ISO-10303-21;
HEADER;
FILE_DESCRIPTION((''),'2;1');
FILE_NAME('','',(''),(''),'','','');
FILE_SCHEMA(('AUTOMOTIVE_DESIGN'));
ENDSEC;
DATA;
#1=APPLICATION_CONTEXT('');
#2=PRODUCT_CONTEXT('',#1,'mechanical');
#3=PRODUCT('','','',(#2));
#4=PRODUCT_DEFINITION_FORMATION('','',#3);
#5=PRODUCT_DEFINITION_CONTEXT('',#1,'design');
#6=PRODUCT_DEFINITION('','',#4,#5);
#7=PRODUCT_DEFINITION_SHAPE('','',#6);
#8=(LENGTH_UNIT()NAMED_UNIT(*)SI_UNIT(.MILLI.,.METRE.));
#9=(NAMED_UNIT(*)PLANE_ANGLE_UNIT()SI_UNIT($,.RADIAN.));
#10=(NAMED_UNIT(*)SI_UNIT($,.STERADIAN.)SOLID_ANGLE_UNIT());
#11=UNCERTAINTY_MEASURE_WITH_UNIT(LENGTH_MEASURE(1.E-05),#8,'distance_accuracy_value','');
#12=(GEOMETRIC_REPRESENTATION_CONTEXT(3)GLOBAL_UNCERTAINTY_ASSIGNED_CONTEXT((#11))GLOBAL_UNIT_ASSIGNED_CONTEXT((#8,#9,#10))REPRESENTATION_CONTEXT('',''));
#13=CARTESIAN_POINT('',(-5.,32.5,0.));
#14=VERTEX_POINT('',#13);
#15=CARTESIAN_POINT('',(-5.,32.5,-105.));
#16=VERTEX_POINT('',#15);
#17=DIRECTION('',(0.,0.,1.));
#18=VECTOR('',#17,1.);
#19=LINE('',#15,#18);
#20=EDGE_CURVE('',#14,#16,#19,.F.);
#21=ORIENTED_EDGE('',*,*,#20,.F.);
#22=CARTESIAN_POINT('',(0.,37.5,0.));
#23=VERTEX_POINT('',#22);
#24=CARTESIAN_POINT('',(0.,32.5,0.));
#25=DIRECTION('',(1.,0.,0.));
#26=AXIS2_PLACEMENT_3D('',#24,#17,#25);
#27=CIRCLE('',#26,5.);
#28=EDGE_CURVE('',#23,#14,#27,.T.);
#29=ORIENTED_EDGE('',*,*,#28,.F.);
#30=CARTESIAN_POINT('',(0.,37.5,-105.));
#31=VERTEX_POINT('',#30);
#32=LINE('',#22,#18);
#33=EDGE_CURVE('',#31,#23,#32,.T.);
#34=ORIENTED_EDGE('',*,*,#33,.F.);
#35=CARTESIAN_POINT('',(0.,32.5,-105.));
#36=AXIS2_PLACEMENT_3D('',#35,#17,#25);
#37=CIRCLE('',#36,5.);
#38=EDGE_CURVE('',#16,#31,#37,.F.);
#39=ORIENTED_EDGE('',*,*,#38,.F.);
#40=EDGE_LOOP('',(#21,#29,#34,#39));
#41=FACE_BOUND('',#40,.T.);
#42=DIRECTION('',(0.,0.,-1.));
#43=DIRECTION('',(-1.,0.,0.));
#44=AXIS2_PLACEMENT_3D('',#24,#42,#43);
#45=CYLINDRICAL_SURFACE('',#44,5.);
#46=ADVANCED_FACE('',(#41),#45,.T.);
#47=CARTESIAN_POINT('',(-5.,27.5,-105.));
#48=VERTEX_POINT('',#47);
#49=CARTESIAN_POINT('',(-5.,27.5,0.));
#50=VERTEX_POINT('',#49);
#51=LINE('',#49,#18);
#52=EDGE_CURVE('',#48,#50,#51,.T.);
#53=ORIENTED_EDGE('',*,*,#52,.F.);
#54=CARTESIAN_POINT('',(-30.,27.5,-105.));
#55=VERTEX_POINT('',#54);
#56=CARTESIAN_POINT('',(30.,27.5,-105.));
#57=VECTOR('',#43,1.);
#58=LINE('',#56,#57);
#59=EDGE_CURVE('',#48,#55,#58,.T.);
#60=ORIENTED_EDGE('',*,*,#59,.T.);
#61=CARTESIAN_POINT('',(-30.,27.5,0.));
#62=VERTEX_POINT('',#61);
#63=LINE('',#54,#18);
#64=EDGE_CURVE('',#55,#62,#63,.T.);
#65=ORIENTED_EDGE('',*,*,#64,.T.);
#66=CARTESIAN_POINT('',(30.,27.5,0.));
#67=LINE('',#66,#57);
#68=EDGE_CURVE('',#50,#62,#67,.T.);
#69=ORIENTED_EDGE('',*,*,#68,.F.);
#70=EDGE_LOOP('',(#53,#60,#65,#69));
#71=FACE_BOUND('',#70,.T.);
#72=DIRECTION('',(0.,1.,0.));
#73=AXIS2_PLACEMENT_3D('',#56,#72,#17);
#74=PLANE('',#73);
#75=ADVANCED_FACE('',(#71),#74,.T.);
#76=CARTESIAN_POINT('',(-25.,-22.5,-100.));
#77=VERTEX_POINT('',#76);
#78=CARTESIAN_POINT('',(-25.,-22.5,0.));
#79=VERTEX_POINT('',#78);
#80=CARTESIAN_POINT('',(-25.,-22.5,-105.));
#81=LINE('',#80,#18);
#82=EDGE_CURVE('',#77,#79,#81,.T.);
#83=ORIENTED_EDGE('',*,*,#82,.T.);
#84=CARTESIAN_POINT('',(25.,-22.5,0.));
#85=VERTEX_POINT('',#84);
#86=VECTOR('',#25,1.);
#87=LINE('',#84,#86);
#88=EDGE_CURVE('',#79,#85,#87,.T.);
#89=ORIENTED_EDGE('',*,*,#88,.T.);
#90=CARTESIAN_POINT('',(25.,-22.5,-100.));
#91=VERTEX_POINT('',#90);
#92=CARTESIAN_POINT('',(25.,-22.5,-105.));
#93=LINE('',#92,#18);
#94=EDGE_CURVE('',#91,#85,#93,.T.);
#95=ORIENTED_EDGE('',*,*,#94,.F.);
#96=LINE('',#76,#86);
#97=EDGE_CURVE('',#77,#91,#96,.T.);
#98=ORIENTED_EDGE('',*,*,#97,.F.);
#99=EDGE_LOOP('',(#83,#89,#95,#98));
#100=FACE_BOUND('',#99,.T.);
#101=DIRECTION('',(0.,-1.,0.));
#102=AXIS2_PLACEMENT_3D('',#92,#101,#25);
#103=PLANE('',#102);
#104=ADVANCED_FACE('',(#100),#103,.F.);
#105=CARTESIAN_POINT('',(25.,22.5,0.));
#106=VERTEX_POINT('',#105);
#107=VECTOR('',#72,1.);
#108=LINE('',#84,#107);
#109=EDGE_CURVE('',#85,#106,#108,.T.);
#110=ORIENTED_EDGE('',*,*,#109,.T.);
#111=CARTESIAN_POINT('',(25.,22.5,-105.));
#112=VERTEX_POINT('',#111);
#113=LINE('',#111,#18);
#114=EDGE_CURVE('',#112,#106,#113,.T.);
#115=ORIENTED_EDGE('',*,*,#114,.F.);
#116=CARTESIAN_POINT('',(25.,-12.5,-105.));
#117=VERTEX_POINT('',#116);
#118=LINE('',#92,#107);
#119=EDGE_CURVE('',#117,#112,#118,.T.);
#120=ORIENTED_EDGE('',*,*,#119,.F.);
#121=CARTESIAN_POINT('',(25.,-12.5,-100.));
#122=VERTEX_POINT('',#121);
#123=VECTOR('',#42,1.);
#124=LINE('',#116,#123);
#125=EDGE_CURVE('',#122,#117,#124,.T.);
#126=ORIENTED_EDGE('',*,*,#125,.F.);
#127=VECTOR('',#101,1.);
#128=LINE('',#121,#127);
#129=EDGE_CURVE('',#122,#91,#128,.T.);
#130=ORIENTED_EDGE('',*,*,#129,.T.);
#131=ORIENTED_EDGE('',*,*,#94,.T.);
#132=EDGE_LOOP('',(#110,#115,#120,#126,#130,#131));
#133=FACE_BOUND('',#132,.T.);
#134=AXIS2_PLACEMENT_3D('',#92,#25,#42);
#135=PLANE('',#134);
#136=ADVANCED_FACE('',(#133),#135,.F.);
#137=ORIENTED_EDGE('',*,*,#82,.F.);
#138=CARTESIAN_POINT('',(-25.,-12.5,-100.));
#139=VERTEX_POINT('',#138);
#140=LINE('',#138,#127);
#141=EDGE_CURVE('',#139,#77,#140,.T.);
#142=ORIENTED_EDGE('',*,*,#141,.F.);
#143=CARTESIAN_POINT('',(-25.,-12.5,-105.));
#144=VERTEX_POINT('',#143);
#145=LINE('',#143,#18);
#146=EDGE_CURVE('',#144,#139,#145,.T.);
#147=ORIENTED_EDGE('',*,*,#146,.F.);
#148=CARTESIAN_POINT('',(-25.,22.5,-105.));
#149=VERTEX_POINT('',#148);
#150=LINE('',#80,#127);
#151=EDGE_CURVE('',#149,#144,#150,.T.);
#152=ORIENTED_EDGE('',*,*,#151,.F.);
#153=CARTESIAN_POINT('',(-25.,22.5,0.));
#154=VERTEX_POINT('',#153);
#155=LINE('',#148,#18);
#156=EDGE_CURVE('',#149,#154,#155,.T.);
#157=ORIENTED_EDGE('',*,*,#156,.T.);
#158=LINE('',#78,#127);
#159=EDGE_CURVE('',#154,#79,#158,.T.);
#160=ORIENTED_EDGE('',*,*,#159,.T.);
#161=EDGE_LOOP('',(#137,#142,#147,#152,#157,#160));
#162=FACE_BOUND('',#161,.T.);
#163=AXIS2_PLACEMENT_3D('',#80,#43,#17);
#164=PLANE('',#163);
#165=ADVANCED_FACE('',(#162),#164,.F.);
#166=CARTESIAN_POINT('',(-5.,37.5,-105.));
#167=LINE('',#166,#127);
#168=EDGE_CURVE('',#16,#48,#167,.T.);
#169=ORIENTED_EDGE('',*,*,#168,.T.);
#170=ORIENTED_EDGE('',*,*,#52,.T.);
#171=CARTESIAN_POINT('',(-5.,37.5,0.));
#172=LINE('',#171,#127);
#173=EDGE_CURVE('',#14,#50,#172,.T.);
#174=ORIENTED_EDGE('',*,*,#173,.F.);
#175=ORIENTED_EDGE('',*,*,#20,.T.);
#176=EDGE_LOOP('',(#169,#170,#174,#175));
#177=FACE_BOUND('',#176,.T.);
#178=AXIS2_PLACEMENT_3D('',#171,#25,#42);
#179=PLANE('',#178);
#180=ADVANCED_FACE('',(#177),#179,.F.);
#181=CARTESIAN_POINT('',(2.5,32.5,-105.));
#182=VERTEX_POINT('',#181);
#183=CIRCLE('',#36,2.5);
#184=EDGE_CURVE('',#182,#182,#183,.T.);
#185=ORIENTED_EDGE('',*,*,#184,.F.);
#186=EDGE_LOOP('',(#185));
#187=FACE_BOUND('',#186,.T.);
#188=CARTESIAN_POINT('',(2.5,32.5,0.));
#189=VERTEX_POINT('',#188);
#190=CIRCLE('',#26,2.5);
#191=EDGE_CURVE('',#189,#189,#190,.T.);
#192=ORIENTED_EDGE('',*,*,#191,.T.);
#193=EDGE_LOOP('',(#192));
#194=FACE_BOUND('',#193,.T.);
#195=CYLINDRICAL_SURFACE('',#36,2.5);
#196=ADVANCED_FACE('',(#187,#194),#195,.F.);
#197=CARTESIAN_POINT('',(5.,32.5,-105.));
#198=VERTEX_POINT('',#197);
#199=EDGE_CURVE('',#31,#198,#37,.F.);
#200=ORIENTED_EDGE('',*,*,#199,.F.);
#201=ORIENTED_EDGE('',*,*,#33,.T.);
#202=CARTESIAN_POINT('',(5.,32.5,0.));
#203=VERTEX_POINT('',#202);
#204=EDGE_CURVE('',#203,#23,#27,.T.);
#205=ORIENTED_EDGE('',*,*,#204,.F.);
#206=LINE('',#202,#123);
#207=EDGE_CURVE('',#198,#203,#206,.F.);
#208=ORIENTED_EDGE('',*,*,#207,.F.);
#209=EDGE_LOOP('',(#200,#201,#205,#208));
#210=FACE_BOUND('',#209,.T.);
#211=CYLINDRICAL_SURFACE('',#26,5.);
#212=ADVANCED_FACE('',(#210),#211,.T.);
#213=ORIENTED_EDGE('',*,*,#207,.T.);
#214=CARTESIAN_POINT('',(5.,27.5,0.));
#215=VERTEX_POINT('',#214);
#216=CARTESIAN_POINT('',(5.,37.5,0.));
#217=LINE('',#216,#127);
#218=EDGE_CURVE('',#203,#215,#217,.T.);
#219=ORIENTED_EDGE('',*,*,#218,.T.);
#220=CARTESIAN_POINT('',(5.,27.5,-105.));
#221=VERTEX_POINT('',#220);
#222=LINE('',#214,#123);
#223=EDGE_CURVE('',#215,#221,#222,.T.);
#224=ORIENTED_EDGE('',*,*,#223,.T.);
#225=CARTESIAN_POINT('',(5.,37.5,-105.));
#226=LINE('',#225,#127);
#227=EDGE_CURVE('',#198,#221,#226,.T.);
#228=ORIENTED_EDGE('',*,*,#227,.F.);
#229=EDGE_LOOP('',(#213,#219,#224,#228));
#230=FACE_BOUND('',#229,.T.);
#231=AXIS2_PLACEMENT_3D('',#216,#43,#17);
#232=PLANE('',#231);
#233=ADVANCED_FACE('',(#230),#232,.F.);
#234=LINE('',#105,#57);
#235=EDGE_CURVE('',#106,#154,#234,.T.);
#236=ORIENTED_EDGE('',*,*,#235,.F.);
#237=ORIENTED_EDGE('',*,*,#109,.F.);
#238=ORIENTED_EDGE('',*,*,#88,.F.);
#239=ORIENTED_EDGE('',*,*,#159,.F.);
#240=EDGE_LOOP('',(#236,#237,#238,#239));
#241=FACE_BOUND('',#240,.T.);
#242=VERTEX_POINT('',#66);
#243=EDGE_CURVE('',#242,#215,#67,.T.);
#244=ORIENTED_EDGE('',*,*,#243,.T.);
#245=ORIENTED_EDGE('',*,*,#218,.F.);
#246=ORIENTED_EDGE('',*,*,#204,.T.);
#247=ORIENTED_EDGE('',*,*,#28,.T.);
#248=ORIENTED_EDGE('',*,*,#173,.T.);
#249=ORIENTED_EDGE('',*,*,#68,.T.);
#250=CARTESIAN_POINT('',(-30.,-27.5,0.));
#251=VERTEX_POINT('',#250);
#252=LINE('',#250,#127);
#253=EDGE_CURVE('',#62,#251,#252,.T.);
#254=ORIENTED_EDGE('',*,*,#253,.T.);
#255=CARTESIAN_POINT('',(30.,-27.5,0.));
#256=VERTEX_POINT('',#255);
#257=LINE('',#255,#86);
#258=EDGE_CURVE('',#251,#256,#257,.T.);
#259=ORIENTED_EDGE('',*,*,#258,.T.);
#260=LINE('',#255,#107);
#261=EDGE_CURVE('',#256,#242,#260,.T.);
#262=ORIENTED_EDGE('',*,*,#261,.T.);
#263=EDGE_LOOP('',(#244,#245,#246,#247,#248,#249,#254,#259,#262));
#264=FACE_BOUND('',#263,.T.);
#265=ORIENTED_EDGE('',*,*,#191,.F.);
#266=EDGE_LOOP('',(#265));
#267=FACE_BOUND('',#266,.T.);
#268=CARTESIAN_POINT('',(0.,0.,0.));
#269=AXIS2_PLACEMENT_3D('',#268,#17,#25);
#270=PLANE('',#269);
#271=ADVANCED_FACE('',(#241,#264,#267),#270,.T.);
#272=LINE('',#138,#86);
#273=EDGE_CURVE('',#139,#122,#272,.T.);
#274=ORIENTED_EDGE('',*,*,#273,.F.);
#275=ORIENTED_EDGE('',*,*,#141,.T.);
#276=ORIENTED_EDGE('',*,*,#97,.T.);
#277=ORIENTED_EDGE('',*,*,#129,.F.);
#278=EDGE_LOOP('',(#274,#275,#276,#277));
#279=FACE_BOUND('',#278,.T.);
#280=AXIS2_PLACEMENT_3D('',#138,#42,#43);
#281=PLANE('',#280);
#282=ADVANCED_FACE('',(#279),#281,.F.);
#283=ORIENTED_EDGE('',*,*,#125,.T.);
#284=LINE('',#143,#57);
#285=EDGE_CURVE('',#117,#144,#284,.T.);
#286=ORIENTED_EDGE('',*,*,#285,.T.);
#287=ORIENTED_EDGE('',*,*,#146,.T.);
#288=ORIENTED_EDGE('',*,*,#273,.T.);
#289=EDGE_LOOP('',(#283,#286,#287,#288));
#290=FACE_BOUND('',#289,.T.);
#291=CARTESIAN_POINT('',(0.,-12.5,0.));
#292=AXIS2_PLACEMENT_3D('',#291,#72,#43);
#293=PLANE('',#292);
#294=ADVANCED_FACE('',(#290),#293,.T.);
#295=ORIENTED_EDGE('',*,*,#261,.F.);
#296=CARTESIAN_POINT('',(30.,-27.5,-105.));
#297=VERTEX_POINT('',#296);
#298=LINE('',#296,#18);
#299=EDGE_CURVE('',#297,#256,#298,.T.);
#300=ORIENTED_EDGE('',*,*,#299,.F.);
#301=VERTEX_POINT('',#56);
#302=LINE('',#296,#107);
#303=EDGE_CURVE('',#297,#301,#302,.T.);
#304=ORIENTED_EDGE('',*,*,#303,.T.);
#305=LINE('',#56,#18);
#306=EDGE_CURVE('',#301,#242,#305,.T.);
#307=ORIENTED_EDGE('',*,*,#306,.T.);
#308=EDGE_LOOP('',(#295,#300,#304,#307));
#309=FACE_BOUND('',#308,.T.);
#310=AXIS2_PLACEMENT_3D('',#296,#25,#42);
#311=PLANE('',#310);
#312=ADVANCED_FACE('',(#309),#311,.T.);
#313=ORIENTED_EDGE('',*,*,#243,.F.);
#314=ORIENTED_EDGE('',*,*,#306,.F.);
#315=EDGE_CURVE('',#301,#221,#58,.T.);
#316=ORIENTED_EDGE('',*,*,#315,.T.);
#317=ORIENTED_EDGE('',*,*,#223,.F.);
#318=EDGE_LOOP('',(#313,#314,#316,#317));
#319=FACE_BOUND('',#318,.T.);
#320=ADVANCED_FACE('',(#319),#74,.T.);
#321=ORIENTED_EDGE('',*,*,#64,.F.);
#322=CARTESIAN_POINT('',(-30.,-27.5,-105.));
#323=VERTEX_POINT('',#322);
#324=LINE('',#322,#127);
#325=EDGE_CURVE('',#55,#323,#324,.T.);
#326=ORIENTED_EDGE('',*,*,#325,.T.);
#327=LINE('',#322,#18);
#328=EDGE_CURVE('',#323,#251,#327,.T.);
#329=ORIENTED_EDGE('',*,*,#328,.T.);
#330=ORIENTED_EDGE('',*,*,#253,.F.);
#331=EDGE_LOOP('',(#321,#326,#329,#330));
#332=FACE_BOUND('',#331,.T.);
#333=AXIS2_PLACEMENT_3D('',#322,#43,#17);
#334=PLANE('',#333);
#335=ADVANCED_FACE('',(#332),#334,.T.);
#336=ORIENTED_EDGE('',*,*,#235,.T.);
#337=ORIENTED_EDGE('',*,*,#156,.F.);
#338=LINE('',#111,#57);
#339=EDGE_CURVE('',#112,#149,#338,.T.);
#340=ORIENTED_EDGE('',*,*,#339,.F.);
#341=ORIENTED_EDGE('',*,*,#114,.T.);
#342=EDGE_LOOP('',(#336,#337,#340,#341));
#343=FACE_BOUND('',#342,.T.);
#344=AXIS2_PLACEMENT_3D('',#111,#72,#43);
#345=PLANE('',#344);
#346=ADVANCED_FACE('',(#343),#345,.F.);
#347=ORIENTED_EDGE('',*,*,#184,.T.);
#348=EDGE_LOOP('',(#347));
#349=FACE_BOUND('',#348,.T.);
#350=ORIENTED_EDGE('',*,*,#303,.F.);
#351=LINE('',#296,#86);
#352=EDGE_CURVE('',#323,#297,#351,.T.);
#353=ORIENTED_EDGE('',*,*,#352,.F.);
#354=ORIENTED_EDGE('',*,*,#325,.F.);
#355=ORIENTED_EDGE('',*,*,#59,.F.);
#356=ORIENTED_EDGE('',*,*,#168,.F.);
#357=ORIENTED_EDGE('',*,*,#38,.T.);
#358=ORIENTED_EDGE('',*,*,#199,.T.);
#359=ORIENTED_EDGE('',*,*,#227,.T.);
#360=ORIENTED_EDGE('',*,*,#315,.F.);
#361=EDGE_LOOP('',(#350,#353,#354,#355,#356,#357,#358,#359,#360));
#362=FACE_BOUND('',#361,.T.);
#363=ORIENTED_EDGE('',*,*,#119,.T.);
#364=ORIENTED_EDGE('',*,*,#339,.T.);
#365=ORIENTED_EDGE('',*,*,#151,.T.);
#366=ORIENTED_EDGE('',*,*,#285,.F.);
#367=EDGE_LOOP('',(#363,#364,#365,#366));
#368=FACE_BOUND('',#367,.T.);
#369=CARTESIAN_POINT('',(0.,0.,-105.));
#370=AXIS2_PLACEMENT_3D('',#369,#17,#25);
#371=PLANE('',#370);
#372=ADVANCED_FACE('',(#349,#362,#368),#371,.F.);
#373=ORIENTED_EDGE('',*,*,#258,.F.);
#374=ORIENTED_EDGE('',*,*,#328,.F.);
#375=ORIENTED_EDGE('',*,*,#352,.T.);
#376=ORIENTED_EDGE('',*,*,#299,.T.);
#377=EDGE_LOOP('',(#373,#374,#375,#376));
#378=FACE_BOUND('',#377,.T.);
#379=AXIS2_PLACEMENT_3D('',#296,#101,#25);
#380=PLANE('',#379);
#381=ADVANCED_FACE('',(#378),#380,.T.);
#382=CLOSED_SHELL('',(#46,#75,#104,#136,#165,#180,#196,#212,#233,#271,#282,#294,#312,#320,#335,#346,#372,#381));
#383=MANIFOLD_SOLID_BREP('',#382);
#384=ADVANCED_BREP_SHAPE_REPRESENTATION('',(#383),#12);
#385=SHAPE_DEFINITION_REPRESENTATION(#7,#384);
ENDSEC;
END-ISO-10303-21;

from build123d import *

# Parameters (mm, degrees)
SKETCH3_W           = 60
SKETCH3_H           = 55
SKETCH3_W_2         = 50
SKETCH3_H_2         = 45
BOSS_EXTRUDE1_DEPTH = 105
SKETCH6_W           = 50
SKETCH6_H           = 5
BOSS_EXTRUDE3_DEPTH = 10
SKETCH7_W           = 10
SKETCH7_H           = 105
BOSS_EXTRUDE4_DEPTH = 10
FILLET1_R           = 5
SKETCH8_R           = 2.5
CUT_EXTRUDE1_DEPTH  = 116.461032388


with BuildPart() as part:
    # Sketch3 → Boss-Extrude1 (new body)
    with BuildSketch(Plane.XY):
        Rectangle(SKETCH3_W, SKETCH3_H)
        Rectangle(SKETCH3_W_2, SKETCH3_H_2, mode=Mode.SUBTRACT)
    extrude(amount=-BOSS_EXTRUDE1_DEPTH)

    # Sketch6 → Boss-Extrude3 (add)
    with BuildSketch(Plane(origin=(0, -22.5, 0), x_dir=(1, 0, 0), z_dir=(0, 1, 0))):
        with Locations((0, 102.5)):
            Rectangle(SKETCH6_W, SKETCH6_H)
    extrude(amount=BOSS_EXTRUDE3_DEPTH)

    # Sketch7 → Boss-Extrude4 (add)
    with BuildSketch(Plane(origin=(0, 27.5, 0), x_dir=(1, 0, 0), z_dir=(0, 1, 0))):
        with Locations((0, 52.5)):
            Rectangle(SKETCH7_W, SKETCH7_H)
    extrude(amount=BOSS_EXTRUDE4_DEPTH)

    # Fillet1
    fillet1_edges = [part.edges().sort_by_distance(p)[0] for p in [
        (5, 37.5, -52.5),
        (-5, 37.5, -52.5),
    ]]
    fillet(fillet1_edges, radius=FILLET1_R - 0.0001)  # a hair under: the kernel refuses the full size

    # Sketch8 → Cut-Extrude1 (cut, through all)
    with BuildSketch(Plane.XY):
        with Locations((0, 32.5)):
            Circle(SKETCH8_R)
    extrude(amount=-CUT_EXTRUDE1_DEPTH, mode=Mode.SUBTRACT)


solid = part.part
